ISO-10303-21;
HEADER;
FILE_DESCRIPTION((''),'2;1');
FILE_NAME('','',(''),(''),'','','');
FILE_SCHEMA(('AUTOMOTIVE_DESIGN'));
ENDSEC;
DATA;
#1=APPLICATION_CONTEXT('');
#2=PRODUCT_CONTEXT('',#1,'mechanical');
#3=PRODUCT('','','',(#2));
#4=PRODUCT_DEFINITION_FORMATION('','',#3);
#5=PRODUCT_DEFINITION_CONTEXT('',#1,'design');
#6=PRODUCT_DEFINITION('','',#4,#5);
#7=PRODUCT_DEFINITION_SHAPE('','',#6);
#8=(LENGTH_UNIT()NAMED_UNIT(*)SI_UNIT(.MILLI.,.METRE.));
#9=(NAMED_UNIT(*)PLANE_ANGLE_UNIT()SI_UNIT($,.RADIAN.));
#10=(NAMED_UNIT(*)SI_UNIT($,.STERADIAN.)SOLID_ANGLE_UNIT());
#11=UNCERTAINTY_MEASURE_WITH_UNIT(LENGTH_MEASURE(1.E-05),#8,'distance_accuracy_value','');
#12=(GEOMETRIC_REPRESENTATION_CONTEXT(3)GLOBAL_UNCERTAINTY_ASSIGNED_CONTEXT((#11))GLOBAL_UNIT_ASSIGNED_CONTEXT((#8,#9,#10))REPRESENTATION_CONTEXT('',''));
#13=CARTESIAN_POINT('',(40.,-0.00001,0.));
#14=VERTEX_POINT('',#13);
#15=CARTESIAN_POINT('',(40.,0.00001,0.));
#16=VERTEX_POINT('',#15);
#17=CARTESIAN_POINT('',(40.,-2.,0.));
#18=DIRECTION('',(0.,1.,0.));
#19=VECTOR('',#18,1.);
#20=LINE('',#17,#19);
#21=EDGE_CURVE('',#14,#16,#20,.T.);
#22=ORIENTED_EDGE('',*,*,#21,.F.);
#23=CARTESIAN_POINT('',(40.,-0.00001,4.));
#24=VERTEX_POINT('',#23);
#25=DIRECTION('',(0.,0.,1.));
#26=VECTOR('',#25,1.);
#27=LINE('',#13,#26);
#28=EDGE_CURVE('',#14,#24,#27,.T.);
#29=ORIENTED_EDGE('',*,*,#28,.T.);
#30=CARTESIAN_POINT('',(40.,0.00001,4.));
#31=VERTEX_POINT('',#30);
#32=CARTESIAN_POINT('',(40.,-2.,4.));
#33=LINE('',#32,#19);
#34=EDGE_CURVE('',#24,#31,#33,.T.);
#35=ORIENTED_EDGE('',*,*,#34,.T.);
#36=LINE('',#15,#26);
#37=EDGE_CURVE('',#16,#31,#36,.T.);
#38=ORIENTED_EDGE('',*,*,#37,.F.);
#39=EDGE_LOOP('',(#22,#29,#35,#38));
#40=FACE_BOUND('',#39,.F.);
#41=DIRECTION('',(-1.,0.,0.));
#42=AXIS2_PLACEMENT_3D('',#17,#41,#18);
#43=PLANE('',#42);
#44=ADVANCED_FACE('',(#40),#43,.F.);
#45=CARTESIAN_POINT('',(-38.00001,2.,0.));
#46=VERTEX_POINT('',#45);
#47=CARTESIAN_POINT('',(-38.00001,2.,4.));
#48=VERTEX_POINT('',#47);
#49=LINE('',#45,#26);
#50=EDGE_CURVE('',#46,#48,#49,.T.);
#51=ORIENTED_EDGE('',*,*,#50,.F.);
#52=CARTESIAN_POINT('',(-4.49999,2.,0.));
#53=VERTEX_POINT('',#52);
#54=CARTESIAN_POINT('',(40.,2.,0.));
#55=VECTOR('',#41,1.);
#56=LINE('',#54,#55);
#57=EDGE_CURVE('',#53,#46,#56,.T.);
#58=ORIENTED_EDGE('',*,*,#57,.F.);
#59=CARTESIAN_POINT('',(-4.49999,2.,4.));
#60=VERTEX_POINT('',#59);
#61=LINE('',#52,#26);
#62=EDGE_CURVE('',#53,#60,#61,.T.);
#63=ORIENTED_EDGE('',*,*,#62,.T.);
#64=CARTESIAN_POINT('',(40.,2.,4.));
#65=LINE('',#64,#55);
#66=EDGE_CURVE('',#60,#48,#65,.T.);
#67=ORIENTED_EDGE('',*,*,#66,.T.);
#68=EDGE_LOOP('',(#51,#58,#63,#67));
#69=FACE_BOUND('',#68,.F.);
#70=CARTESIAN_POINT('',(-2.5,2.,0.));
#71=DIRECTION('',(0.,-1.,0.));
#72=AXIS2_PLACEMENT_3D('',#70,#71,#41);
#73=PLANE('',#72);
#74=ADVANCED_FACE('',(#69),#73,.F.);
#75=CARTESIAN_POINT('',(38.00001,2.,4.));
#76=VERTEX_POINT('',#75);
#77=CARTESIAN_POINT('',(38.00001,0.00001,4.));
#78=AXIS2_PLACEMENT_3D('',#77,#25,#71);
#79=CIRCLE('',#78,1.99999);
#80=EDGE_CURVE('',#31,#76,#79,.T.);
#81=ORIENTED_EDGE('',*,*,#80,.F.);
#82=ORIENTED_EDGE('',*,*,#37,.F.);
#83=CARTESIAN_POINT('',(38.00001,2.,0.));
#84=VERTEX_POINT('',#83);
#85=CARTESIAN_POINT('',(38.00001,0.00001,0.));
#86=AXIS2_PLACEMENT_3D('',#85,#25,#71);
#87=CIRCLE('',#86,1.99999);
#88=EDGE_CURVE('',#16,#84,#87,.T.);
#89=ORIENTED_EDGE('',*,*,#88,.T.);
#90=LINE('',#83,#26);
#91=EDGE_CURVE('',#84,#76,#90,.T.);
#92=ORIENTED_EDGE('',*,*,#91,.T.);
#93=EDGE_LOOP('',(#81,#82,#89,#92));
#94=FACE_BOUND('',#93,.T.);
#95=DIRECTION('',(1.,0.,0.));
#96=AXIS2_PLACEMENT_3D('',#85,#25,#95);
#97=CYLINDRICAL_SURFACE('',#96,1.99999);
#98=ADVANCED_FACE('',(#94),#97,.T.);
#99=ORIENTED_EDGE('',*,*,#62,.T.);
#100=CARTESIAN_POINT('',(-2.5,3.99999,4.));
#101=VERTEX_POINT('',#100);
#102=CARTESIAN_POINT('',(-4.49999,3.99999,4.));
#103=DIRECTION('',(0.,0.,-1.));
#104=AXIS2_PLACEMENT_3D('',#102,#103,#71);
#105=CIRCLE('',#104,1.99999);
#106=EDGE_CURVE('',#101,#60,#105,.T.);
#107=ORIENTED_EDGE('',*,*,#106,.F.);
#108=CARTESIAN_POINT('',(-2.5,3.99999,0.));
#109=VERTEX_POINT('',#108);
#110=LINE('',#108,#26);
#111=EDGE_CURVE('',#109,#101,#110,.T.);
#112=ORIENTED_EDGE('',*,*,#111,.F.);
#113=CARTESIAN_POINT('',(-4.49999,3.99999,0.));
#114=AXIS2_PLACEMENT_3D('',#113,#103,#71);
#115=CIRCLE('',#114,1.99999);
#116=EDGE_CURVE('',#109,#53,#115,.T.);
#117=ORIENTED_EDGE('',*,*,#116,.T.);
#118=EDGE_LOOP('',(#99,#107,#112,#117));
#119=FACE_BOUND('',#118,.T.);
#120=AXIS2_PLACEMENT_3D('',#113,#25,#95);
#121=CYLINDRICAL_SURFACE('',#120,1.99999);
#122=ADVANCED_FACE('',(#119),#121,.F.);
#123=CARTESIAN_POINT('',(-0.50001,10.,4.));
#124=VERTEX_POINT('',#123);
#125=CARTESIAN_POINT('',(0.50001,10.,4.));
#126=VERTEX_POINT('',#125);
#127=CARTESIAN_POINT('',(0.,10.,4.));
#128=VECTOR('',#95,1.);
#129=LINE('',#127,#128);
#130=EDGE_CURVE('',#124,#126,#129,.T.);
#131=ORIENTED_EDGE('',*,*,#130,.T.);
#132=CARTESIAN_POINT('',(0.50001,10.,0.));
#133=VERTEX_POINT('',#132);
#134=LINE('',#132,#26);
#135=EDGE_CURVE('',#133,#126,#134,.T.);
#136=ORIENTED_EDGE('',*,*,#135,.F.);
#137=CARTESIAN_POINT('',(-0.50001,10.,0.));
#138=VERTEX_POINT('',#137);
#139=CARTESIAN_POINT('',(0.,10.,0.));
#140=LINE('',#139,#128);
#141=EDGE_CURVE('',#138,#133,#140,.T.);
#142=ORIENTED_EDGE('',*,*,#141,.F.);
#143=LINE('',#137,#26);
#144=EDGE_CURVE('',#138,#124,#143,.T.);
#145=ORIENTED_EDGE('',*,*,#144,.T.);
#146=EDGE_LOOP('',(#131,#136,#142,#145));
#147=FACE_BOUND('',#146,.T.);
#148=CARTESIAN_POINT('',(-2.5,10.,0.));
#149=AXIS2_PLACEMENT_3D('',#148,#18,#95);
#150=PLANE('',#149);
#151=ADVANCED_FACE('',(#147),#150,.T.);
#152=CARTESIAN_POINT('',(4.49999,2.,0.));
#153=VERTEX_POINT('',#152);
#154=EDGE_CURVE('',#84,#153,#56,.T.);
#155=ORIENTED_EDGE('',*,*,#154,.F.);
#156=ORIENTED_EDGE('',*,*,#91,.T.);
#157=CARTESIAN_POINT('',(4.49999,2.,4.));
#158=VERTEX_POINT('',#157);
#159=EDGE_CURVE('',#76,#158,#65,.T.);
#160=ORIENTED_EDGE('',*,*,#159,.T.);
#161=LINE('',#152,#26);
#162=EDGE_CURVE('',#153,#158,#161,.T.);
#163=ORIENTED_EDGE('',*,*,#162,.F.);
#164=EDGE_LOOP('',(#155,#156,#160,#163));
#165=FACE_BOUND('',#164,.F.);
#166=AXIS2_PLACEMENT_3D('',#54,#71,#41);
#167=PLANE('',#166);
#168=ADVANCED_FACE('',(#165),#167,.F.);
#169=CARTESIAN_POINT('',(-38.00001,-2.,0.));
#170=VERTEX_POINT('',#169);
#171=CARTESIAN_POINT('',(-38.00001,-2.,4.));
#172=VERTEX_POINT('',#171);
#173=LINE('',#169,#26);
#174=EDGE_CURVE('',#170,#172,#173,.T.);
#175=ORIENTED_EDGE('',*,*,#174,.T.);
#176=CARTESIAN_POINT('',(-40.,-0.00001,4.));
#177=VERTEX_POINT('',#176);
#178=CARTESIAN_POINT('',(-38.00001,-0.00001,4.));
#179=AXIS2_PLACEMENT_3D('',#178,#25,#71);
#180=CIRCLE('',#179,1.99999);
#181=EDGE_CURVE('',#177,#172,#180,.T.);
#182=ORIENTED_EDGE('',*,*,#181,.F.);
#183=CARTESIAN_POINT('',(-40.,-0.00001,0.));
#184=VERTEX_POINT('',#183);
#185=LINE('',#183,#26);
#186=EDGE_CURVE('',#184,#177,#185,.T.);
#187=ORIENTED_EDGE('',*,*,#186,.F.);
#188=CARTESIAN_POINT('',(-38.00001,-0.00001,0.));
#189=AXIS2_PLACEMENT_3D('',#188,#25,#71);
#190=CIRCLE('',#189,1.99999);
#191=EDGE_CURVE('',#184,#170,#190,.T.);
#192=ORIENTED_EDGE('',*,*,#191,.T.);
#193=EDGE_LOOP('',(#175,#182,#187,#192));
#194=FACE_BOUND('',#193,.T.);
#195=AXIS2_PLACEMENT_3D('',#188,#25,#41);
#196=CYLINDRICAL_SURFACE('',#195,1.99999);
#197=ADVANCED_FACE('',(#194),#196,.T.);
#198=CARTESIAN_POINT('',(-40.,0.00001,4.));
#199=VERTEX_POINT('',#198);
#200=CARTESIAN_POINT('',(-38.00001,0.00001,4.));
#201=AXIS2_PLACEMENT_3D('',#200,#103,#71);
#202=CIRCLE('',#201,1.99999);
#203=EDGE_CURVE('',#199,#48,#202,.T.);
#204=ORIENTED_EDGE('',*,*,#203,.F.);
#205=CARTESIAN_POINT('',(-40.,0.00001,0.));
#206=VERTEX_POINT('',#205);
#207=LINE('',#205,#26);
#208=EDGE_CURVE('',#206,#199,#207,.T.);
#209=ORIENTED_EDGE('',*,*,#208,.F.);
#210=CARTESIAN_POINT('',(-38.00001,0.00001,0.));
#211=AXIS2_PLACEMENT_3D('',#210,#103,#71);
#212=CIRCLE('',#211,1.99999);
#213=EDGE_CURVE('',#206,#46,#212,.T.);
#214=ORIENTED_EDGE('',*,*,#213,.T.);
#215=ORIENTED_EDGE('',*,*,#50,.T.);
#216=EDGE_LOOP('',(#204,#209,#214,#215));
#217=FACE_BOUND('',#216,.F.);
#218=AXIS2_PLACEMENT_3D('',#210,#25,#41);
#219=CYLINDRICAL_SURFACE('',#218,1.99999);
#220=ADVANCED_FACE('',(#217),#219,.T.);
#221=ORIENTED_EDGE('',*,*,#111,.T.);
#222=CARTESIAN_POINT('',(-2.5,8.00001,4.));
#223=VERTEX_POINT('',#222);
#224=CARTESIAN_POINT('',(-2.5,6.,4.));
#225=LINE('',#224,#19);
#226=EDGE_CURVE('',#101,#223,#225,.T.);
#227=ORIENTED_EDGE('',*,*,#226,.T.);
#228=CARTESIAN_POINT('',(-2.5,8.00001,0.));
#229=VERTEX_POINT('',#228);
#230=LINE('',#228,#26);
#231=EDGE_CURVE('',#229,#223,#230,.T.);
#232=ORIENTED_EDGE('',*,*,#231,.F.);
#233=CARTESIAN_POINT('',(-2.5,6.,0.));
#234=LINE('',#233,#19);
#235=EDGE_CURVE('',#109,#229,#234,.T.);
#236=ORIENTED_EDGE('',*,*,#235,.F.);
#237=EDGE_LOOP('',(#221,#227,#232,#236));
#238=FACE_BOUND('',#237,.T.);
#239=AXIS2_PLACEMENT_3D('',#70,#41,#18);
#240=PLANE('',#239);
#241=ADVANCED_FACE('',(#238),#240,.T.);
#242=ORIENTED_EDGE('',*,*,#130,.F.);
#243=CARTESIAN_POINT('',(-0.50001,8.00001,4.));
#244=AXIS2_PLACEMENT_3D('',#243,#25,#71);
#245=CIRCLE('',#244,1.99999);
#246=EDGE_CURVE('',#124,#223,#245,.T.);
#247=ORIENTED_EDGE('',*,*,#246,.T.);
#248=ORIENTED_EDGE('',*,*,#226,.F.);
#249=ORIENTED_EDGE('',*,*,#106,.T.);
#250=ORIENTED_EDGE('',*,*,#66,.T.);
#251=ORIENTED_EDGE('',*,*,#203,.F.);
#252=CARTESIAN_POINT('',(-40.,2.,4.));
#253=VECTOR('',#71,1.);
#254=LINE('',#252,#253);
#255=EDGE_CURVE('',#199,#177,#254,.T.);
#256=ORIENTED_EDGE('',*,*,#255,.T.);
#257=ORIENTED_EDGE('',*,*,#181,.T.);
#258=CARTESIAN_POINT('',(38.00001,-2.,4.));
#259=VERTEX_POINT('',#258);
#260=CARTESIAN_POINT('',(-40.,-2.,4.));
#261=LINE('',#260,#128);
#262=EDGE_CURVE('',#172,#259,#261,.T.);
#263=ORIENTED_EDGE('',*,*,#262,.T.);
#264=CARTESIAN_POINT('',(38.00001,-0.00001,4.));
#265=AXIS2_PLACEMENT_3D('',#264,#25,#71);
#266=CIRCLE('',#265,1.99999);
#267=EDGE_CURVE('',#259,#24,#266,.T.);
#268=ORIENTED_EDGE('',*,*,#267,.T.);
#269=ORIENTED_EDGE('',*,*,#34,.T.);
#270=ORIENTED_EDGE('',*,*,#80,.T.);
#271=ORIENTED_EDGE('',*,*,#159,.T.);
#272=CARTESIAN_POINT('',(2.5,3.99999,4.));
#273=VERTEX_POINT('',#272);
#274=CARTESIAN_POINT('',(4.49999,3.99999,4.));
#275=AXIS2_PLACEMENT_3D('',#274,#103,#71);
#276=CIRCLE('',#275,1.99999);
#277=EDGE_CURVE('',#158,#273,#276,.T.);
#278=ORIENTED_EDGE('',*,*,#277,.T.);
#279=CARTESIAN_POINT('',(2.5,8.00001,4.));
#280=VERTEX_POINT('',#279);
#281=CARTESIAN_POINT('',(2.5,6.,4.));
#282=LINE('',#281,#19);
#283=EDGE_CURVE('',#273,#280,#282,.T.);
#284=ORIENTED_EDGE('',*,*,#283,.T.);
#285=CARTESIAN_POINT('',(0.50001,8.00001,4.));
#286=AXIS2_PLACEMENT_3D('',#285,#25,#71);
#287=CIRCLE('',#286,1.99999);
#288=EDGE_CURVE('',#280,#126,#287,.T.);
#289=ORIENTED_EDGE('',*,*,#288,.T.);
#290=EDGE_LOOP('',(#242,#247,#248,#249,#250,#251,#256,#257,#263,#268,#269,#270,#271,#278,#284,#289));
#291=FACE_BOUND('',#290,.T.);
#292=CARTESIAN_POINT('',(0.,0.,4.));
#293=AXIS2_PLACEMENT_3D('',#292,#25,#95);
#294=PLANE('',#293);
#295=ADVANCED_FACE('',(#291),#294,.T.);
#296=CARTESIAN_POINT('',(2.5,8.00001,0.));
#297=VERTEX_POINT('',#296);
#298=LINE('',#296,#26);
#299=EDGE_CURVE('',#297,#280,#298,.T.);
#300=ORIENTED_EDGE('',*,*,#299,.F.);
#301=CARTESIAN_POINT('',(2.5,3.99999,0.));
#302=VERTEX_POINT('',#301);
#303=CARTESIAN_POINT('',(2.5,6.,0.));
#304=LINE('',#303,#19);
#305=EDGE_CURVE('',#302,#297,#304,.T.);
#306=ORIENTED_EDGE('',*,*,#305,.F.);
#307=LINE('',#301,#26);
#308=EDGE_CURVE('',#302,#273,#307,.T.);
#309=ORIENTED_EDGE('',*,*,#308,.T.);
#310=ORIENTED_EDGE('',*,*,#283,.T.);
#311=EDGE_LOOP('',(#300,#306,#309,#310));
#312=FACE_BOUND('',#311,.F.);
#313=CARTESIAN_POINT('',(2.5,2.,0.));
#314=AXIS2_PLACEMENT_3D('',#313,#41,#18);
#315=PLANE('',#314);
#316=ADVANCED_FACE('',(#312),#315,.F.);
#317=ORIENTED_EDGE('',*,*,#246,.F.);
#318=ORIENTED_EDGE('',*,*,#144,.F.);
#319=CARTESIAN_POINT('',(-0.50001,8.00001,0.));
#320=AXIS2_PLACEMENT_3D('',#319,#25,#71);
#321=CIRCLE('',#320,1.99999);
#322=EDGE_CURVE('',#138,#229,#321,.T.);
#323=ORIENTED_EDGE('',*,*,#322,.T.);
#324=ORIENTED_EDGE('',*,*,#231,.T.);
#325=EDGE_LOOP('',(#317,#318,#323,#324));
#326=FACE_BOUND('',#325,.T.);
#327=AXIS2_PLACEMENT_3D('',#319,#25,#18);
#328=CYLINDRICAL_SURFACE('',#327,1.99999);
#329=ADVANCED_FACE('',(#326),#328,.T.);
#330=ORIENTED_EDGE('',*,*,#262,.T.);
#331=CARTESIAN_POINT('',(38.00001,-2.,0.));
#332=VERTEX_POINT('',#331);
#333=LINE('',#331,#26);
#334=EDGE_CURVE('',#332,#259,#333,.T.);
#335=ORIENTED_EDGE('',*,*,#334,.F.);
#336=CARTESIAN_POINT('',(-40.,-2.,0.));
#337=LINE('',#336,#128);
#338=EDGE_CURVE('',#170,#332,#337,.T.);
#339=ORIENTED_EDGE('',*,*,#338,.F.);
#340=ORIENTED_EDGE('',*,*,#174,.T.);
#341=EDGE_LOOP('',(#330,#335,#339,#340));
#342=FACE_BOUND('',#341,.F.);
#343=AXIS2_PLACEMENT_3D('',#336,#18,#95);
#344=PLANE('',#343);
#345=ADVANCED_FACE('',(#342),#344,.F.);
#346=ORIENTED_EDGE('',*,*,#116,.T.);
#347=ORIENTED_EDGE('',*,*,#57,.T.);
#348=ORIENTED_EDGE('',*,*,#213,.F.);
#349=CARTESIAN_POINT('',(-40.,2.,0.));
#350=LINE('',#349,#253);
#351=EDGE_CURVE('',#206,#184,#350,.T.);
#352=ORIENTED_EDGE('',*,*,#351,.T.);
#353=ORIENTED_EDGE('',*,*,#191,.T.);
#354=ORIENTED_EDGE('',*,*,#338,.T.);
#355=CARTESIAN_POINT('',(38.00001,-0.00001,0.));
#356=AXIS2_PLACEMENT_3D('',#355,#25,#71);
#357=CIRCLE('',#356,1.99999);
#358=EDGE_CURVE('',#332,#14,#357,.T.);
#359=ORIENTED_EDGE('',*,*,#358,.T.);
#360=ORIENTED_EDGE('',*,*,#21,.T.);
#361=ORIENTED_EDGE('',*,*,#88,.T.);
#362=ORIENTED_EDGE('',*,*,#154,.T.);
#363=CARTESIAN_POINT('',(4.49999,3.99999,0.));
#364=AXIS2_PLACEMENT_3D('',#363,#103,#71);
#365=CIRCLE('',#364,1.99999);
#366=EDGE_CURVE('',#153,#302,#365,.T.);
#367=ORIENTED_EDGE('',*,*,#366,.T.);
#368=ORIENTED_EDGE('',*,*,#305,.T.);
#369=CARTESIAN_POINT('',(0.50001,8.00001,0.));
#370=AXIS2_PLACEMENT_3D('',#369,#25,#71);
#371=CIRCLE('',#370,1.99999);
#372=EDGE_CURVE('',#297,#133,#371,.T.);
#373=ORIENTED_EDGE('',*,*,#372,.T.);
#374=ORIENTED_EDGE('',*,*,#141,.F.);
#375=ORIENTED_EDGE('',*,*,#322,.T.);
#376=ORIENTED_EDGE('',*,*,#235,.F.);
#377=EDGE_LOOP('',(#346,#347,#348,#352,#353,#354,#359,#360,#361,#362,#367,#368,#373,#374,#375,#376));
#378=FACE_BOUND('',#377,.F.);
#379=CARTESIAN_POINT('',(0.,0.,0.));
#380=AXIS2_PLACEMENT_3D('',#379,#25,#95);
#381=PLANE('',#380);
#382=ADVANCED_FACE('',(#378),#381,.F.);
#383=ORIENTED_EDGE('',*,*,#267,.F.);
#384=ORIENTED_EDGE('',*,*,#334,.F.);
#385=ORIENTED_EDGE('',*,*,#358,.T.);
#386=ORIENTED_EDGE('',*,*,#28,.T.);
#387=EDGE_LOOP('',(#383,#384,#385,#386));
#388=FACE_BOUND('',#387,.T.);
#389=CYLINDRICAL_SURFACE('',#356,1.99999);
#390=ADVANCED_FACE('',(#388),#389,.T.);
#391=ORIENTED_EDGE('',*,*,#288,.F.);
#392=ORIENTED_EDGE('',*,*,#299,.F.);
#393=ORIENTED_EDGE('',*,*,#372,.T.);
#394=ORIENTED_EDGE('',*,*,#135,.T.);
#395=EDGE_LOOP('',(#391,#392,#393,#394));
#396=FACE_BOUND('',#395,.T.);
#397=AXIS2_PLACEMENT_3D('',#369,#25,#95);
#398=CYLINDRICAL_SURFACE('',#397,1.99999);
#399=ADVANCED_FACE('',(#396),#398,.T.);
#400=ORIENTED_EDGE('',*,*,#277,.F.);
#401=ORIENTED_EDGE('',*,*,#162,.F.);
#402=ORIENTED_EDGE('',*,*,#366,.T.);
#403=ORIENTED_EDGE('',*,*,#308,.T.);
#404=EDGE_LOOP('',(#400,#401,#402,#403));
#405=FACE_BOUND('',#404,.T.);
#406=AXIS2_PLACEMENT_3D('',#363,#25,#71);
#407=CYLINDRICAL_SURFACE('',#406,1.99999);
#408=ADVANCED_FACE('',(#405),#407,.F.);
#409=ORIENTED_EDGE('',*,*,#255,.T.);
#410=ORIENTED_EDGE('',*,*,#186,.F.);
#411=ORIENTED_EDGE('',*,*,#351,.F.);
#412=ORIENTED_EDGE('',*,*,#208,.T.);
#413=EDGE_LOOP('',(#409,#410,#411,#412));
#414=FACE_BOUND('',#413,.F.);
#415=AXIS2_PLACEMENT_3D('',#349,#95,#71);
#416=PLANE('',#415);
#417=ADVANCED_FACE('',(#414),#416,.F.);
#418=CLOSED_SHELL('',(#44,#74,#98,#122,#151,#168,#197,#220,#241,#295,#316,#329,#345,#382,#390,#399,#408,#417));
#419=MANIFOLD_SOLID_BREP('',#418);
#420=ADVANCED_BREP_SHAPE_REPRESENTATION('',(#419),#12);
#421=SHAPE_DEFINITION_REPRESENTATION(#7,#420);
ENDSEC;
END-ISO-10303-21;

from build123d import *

# Parameters (mm, degrees)
F0_W     = 5
F0_H     = 8
F1_DEPTH = 4
F2_R     = 1.99999


# Not quite as in the source:
# - a fillet or chamfer is up to 0.001 mm smaller than in the source, because OpenCascade refuses the exact size


with BuildPart() as f1:
    # F0 (on Top) → F1 (new body)
    with BuildSketch(Plane.XY):
        Polygon((-2.5, 2), (-40, 2), (-40, -2), (40, -2), (40, 2), (2.5, 2), align=None)
        with Locations((0, 6)):
            Rectangle(F0_W, F0_H)
    extrude(amount=F1_DEPTH)

    # F2 (radius 2 in the source; OpenCascade refuses exactly that, so slightly less here)
    f2_edges = [f1.edges().sort_by_distance(p)[0] for p in [
        (-40, -2, 2),
        (40, -2, 2),
        (40, 2, 2),
        (-40, 2, 2),
        (-2.5, 10, 2),
        (2.5, 10, 2),
        (-2.5, 2, 2),
        (2.5, 2, 2),
    ]]
    fillet(f2_edges, radius=F2_R)


solid = f1.part
